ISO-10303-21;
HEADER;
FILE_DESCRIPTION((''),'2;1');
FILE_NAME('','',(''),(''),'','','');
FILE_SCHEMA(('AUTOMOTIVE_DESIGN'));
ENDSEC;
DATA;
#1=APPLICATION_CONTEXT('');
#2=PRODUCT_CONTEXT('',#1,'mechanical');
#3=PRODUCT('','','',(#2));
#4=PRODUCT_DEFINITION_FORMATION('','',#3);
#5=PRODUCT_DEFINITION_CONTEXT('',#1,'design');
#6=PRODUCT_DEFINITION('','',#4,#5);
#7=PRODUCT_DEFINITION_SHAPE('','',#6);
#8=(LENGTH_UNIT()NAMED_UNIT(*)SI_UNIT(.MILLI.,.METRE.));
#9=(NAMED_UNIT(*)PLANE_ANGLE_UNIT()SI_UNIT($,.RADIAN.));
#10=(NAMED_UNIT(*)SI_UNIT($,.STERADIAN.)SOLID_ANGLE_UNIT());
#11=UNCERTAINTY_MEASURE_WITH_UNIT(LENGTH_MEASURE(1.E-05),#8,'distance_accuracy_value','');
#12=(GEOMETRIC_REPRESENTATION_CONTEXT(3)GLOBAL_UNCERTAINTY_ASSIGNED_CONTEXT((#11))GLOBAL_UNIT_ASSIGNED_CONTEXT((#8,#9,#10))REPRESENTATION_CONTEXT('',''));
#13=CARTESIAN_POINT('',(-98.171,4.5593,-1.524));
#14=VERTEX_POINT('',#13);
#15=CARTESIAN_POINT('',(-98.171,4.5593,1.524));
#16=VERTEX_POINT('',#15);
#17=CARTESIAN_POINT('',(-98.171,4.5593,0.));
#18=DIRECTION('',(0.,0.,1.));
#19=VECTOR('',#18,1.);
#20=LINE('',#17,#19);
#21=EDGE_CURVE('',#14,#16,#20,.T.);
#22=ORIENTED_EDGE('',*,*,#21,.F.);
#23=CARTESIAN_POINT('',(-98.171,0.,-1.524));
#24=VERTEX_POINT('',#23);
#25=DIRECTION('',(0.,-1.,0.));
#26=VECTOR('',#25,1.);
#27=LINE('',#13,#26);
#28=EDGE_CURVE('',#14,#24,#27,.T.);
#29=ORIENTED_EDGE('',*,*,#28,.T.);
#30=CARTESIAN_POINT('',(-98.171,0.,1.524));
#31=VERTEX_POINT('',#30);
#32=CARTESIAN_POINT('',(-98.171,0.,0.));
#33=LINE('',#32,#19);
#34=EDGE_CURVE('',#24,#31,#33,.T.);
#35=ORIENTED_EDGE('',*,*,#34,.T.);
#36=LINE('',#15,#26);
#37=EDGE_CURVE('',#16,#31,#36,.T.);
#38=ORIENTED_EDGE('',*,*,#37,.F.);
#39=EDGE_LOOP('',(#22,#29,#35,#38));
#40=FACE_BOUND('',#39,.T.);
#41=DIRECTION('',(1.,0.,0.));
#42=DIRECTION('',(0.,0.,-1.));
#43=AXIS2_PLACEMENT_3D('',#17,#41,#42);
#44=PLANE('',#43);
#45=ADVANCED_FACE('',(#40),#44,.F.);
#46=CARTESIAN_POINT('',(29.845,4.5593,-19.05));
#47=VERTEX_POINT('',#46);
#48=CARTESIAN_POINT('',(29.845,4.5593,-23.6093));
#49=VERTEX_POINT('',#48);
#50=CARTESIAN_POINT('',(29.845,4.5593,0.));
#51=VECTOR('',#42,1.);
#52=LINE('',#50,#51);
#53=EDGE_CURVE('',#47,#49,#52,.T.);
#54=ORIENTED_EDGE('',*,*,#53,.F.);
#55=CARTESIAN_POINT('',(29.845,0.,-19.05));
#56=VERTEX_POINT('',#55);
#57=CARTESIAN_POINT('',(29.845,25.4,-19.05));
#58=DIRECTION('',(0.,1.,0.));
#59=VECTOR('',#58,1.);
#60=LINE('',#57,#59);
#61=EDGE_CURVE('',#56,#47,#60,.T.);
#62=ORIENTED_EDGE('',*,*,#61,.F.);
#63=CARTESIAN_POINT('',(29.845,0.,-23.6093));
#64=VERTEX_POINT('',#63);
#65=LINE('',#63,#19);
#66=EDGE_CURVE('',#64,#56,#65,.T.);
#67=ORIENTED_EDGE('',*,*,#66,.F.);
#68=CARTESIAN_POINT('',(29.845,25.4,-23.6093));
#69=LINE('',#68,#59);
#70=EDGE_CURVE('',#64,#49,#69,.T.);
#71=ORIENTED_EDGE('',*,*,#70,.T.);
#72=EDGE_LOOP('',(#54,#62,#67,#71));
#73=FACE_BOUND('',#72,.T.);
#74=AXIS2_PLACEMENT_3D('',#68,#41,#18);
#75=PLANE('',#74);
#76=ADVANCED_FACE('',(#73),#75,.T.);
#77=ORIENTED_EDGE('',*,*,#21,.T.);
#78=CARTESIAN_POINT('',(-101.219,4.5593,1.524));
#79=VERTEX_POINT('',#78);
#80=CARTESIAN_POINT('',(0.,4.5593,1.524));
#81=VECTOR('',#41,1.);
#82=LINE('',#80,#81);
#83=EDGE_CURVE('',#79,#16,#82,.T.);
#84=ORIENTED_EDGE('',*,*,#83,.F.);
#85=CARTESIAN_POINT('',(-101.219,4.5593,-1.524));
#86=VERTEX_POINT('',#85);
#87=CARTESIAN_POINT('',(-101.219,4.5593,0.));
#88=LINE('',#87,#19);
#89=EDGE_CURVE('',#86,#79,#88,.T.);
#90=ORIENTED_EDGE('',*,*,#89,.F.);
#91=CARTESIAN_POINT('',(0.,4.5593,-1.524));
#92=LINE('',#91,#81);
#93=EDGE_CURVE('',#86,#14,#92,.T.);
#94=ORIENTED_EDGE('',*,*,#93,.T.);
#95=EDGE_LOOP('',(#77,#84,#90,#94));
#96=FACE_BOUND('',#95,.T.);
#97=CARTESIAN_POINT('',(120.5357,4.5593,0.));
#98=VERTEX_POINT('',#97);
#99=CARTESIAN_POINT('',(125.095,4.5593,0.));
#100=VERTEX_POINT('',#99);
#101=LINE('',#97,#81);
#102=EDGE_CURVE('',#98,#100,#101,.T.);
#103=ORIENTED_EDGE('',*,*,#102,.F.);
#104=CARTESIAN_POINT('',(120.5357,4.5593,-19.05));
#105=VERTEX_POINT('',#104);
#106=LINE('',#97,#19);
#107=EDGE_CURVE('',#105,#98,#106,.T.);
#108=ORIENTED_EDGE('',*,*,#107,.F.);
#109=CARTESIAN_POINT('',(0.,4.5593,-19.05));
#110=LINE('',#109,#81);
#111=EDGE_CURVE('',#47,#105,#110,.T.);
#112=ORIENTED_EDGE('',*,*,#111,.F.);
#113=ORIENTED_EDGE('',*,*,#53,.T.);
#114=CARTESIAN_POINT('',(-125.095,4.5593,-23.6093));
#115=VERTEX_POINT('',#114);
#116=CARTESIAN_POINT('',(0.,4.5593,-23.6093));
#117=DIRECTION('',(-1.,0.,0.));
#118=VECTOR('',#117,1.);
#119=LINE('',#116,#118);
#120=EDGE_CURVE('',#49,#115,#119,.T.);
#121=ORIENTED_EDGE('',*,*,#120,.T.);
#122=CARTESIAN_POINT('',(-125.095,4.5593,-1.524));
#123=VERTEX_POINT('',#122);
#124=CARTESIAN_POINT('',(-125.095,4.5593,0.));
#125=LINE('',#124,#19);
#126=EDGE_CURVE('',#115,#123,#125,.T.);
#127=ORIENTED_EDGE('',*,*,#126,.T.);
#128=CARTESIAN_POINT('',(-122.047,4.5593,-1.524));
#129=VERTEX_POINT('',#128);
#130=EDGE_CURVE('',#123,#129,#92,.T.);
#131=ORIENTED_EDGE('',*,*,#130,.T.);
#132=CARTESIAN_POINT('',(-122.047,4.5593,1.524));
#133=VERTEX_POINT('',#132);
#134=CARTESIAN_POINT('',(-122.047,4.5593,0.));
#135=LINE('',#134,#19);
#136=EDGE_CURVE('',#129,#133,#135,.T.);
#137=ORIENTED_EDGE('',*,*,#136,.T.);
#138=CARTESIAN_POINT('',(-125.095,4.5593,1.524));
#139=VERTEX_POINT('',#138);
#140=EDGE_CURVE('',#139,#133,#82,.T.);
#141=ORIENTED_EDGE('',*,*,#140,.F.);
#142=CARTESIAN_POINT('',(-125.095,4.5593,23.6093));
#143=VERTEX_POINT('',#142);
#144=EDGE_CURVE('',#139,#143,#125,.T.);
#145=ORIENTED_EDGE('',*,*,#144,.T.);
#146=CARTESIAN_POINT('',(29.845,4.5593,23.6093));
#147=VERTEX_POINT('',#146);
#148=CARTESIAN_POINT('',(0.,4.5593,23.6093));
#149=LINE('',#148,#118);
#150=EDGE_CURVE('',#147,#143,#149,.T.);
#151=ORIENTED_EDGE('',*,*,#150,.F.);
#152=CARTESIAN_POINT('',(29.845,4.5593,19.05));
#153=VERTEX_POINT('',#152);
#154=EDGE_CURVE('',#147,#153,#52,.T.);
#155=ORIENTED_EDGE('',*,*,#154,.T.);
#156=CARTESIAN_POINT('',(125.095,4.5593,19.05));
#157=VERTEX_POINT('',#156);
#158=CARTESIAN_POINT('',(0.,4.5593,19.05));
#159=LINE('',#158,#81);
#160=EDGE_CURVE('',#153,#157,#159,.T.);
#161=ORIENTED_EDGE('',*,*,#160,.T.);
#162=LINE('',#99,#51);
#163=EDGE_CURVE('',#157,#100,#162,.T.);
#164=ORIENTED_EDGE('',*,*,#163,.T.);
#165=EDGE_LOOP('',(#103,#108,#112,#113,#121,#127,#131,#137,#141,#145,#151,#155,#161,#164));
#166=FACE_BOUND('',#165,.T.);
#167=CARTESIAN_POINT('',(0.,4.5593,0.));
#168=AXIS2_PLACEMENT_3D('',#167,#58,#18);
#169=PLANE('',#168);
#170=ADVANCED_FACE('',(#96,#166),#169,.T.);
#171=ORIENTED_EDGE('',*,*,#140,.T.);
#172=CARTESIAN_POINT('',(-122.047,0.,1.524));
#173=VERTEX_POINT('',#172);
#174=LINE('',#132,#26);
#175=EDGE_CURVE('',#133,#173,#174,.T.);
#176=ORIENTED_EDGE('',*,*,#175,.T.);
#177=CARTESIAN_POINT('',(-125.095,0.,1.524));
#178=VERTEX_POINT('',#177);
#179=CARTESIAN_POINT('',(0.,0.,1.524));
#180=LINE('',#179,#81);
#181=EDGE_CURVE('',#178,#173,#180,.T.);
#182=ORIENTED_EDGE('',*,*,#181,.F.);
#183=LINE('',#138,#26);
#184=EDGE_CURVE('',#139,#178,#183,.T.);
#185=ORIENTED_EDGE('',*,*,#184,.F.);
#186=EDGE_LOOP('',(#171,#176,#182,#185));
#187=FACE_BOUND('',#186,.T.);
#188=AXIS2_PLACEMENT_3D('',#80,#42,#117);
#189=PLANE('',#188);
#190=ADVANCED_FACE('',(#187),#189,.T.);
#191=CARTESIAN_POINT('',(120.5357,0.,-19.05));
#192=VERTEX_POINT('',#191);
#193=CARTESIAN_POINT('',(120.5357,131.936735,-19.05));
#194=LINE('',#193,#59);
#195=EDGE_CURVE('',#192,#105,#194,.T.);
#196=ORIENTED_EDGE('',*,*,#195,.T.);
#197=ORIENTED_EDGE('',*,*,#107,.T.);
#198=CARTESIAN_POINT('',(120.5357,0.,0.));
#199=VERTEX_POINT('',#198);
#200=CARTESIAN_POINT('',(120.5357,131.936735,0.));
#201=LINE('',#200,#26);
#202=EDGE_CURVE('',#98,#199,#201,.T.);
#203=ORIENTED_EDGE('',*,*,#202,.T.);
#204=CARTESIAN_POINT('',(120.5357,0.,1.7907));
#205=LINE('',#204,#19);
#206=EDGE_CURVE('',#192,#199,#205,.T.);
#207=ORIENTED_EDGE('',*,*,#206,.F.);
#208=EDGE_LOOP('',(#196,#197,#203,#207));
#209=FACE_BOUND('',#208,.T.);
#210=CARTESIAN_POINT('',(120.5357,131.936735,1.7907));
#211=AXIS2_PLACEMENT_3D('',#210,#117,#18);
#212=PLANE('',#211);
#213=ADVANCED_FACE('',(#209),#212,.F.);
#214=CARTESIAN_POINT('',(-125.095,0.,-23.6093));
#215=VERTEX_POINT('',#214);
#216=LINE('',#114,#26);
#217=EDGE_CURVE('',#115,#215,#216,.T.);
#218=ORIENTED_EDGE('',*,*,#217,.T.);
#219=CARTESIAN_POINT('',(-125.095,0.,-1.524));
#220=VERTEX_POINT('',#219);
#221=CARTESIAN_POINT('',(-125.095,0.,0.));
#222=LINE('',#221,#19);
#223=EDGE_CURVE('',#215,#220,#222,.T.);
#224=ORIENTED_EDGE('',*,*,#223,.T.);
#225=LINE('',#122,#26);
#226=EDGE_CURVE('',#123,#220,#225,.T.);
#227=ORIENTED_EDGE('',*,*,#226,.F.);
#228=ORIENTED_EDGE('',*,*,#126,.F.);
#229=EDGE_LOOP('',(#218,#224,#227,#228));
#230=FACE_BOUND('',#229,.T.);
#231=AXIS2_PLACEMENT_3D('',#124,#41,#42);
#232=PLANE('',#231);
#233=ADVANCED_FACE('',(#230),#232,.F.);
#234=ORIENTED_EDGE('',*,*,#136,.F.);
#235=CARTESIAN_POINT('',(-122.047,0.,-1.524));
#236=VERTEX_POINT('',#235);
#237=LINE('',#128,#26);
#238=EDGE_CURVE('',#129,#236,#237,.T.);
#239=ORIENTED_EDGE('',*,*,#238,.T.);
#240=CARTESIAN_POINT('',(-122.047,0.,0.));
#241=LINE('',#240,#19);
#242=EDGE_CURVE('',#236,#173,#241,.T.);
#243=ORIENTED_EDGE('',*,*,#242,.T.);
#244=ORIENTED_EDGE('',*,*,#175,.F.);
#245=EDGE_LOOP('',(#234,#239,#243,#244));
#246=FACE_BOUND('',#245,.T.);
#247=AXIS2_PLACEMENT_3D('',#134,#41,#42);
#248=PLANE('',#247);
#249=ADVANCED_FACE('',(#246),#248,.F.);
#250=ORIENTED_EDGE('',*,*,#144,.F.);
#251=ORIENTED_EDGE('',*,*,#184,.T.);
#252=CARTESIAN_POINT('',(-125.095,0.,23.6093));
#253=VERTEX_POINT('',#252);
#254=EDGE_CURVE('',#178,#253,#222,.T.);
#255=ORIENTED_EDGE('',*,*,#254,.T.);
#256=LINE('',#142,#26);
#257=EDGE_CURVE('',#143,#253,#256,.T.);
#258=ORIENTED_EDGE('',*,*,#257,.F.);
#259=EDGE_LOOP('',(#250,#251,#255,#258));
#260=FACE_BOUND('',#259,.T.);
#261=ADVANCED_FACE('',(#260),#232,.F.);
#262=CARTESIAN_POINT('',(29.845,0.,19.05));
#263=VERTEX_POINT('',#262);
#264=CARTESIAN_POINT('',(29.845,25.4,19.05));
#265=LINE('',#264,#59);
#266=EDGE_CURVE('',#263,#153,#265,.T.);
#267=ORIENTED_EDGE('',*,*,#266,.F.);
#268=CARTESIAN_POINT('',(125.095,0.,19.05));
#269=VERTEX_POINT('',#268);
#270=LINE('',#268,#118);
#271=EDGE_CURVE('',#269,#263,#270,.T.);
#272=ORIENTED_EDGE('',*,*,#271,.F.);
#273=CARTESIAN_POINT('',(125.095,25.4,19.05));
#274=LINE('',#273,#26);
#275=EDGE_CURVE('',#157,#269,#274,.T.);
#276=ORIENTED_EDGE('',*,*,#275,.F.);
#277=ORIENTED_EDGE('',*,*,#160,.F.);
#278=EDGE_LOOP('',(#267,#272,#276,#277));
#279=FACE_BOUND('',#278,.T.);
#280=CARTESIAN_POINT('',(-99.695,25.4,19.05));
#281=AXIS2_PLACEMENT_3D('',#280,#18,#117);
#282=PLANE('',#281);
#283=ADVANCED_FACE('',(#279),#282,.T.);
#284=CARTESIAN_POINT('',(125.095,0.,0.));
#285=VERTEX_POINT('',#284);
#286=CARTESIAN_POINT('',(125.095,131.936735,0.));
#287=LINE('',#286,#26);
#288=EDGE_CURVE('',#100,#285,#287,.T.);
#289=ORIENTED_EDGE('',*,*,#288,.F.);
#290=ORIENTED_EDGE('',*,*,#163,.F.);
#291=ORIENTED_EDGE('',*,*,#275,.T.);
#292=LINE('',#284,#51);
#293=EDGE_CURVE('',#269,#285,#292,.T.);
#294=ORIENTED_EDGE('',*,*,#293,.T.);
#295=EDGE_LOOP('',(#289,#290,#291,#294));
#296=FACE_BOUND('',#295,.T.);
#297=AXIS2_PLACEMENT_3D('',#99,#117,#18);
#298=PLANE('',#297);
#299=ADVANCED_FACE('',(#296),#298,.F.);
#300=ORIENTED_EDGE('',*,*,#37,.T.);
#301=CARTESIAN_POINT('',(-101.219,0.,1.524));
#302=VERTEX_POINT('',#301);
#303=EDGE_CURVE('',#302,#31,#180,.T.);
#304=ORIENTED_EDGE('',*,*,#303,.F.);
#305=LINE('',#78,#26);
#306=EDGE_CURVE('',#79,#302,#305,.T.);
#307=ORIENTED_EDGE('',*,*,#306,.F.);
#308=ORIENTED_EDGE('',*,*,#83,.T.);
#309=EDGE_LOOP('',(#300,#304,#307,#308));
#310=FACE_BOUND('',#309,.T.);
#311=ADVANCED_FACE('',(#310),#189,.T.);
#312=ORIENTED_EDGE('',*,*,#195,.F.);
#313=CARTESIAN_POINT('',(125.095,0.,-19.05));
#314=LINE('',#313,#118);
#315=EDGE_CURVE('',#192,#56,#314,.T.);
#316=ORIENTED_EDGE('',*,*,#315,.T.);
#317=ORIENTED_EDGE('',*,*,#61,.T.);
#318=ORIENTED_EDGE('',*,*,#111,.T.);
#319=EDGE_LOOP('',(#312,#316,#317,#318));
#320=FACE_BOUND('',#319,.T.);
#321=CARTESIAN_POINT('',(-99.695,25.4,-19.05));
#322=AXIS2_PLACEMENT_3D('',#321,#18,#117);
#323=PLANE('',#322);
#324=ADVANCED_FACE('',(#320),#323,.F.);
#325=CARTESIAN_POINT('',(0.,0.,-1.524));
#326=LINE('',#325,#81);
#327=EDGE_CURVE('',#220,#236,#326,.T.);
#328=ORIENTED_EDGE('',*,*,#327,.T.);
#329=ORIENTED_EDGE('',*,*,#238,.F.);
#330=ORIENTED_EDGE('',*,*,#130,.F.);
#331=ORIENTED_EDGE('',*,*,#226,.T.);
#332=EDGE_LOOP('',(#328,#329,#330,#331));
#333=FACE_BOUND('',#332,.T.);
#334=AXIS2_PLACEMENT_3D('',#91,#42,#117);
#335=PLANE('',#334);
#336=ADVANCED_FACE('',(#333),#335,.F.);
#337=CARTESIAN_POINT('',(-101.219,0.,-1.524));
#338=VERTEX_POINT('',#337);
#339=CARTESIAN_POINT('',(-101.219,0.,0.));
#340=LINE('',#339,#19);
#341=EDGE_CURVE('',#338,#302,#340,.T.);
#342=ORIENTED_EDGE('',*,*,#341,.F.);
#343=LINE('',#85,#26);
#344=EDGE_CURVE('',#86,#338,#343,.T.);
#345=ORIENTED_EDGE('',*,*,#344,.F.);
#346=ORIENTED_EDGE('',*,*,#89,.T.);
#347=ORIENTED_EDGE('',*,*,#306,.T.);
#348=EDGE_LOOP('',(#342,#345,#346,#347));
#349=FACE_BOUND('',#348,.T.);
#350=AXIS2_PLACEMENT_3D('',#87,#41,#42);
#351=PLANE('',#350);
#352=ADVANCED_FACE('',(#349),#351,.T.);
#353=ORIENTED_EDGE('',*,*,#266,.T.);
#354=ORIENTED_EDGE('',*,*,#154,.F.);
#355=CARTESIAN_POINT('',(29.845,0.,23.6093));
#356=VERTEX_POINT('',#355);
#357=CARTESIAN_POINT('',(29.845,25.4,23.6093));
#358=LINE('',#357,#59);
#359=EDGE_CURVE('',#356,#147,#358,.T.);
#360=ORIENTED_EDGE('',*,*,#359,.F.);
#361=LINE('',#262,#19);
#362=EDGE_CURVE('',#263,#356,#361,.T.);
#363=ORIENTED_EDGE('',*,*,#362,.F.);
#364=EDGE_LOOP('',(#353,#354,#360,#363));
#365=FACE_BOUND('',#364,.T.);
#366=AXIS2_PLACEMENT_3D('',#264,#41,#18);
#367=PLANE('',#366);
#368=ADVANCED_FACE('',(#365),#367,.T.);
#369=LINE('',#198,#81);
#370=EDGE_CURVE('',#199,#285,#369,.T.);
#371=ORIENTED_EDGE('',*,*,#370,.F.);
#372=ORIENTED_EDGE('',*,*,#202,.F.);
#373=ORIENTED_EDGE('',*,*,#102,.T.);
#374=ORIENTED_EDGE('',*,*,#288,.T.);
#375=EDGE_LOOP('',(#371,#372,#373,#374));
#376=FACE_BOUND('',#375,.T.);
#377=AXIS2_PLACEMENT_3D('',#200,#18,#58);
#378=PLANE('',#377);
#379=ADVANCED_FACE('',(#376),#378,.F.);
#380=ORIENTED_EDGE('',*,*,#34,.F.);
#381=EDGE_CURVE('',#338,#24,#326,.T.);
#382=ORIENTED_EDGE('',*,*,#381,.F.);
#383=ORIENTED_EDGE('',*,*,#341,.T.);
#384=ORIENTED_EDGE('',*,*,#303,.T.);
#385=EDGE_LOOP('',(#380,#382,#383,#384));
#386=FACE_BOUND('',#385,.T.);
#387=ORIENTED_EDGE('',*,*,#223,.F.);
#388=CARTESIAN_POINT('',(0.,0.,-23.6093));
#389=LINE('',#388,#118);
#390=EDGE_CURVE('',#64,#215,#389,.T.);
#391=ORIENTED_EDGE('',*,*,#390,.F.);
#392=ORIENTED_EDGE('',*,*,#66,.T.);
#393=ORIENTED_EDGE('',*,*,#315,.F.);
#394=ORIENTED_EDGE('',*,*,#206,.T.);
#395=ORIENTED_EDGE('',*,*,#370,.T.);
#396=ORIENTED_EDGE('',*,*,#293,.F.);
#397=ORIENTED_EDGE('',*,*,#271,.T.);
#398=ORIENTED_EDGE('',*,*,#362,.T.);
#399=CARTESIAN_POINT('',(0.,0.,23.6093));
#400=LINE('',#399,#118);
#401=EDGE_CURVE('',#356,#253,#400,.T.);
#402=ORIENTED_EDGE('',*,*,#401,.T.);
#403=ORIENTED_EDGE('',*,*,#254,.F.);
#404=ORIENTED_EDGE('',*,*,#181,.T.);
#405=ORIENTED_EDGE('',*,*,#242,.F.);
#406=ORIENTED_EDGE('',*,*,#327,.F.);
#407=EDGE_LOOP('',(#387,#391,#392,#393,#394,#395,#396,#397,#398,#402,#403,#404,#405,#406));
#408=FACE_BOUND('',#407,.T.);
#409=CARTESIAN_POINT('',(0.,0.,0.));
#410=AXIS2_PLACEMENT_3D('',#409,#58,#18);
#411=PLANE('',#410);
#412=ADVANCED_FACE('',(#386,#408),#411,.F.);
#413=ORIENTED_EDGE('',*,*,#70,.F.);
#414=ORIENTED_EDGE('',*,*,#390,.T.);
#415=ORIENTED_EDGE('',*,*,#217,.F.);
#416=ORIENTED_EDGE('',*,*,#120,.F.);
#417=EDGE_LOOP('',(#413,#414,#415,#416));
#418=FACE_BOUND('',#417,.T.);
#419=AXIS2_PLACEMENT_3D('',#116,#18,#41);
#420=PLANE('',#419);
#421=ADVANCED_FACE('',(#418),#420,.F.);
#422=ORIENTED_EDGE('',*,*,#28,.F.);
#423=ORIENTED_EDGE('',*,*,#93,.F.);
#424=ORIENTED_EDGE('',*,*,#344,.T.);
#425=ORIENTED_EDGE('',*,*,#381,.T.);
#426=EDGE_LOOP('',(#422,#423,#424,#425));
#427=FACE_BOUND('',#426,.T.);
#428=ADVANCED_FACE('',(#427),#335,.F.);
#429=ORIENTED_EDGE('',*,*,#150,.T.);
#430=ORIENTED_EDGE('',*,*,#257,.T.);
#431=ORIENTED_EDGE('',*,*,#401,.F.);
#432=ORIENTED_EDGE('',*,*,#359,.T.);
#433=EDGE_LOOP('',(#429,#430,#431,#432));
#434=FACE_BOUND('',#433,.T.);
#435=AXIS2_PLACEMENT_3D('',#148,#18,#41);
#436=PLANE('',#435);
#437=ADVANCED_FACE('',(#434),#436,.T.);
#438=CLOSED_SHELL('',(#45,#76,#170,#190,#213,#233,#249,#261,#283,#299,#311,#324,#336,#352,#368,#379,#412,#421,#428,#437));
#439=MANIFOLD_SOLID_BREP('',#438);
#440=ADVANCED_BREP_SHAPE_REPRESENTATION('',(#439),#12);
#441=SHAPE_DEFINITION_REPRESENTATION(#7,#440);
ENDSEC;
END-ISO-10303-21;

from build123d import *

# Parameters (mm, degrees)
SKETCH1_W           = 3.048
SKETCH1_H           = 3.048
BOSS_EXTRUDE1_DEPTH = 4.5593
CAVITY1_START       = 29.845
CAVITY1_OUTLINE_W   = 4.5593
CAVITY1_OUTLINE_H   = 4.5593
CAVITY1_DEPTH       = 95.25
CAVITY1_START_2     = 120.5357
CAVITY1_2_OUTLINE_W = 4.5593
CAVITY1_2_OUTLINE_H = 19.05
CAVITY1_2_DEPTH     = 4.5593


# Read off the part's stored shape, not the designer's step: Cavity1
with BuildPart() as part:
    # Sketch1 → Boss-Extrude1 (new body)
    with BuildSketch(Plane(origin=(0, 0, 0), x_dir=(1, 0, 0), z_dir=(0, 1, 0))):
        Polygon((125.095, -23.6093), (-125.095, -23.6093), (-125.095, -1.524), (-122.047, -1.524), (-122.047, 1.524), (-125.095, 1.524), (-125.095, 23.6093), (125.095, 23.6093), align=None)
        with Locations((-99.695, 0)):
            Rectangle(SKETCH1_W, SKETCH1_H, mode=Mode.SUBTRACT)
    extrude(amount=BOSS_EXTRUDE1_DEPTH)

    # Cavity1 outline → Cavity1 (cut)
    with BuildSketch(Plane.YZ.offset(CAVITY1_START)):
        with Locations((2.27965, 21.32965)):
            Rectangle(CAVITY1_OUTLINE_W, CAVITY1_OUTLINE_H)
        with Locations((2.27965, -21.32965)):
            Rectangle(CAVITY1_OUTLINE_W, CAVITY1_OUTLINE_H)
    extrude(amount=CAVITY1_DEPTH, mode=Mode.SUBTRACT)

    # Cavity1 2 outline → Cavity1 2 (cut)
    with BuildSketch(Plane.YZ.offset(CAVITY1_START_2)):
        with Locations((2.27965, -9.525)):
            Rectangle(CAVITY1_2_OUTLINE_W, CAVITY1_2_OUTLINE_H)
    extrude(amount=CAVITY1_2_DEPTH, mode=Mode.SUBTRACT)


solid = part.part
